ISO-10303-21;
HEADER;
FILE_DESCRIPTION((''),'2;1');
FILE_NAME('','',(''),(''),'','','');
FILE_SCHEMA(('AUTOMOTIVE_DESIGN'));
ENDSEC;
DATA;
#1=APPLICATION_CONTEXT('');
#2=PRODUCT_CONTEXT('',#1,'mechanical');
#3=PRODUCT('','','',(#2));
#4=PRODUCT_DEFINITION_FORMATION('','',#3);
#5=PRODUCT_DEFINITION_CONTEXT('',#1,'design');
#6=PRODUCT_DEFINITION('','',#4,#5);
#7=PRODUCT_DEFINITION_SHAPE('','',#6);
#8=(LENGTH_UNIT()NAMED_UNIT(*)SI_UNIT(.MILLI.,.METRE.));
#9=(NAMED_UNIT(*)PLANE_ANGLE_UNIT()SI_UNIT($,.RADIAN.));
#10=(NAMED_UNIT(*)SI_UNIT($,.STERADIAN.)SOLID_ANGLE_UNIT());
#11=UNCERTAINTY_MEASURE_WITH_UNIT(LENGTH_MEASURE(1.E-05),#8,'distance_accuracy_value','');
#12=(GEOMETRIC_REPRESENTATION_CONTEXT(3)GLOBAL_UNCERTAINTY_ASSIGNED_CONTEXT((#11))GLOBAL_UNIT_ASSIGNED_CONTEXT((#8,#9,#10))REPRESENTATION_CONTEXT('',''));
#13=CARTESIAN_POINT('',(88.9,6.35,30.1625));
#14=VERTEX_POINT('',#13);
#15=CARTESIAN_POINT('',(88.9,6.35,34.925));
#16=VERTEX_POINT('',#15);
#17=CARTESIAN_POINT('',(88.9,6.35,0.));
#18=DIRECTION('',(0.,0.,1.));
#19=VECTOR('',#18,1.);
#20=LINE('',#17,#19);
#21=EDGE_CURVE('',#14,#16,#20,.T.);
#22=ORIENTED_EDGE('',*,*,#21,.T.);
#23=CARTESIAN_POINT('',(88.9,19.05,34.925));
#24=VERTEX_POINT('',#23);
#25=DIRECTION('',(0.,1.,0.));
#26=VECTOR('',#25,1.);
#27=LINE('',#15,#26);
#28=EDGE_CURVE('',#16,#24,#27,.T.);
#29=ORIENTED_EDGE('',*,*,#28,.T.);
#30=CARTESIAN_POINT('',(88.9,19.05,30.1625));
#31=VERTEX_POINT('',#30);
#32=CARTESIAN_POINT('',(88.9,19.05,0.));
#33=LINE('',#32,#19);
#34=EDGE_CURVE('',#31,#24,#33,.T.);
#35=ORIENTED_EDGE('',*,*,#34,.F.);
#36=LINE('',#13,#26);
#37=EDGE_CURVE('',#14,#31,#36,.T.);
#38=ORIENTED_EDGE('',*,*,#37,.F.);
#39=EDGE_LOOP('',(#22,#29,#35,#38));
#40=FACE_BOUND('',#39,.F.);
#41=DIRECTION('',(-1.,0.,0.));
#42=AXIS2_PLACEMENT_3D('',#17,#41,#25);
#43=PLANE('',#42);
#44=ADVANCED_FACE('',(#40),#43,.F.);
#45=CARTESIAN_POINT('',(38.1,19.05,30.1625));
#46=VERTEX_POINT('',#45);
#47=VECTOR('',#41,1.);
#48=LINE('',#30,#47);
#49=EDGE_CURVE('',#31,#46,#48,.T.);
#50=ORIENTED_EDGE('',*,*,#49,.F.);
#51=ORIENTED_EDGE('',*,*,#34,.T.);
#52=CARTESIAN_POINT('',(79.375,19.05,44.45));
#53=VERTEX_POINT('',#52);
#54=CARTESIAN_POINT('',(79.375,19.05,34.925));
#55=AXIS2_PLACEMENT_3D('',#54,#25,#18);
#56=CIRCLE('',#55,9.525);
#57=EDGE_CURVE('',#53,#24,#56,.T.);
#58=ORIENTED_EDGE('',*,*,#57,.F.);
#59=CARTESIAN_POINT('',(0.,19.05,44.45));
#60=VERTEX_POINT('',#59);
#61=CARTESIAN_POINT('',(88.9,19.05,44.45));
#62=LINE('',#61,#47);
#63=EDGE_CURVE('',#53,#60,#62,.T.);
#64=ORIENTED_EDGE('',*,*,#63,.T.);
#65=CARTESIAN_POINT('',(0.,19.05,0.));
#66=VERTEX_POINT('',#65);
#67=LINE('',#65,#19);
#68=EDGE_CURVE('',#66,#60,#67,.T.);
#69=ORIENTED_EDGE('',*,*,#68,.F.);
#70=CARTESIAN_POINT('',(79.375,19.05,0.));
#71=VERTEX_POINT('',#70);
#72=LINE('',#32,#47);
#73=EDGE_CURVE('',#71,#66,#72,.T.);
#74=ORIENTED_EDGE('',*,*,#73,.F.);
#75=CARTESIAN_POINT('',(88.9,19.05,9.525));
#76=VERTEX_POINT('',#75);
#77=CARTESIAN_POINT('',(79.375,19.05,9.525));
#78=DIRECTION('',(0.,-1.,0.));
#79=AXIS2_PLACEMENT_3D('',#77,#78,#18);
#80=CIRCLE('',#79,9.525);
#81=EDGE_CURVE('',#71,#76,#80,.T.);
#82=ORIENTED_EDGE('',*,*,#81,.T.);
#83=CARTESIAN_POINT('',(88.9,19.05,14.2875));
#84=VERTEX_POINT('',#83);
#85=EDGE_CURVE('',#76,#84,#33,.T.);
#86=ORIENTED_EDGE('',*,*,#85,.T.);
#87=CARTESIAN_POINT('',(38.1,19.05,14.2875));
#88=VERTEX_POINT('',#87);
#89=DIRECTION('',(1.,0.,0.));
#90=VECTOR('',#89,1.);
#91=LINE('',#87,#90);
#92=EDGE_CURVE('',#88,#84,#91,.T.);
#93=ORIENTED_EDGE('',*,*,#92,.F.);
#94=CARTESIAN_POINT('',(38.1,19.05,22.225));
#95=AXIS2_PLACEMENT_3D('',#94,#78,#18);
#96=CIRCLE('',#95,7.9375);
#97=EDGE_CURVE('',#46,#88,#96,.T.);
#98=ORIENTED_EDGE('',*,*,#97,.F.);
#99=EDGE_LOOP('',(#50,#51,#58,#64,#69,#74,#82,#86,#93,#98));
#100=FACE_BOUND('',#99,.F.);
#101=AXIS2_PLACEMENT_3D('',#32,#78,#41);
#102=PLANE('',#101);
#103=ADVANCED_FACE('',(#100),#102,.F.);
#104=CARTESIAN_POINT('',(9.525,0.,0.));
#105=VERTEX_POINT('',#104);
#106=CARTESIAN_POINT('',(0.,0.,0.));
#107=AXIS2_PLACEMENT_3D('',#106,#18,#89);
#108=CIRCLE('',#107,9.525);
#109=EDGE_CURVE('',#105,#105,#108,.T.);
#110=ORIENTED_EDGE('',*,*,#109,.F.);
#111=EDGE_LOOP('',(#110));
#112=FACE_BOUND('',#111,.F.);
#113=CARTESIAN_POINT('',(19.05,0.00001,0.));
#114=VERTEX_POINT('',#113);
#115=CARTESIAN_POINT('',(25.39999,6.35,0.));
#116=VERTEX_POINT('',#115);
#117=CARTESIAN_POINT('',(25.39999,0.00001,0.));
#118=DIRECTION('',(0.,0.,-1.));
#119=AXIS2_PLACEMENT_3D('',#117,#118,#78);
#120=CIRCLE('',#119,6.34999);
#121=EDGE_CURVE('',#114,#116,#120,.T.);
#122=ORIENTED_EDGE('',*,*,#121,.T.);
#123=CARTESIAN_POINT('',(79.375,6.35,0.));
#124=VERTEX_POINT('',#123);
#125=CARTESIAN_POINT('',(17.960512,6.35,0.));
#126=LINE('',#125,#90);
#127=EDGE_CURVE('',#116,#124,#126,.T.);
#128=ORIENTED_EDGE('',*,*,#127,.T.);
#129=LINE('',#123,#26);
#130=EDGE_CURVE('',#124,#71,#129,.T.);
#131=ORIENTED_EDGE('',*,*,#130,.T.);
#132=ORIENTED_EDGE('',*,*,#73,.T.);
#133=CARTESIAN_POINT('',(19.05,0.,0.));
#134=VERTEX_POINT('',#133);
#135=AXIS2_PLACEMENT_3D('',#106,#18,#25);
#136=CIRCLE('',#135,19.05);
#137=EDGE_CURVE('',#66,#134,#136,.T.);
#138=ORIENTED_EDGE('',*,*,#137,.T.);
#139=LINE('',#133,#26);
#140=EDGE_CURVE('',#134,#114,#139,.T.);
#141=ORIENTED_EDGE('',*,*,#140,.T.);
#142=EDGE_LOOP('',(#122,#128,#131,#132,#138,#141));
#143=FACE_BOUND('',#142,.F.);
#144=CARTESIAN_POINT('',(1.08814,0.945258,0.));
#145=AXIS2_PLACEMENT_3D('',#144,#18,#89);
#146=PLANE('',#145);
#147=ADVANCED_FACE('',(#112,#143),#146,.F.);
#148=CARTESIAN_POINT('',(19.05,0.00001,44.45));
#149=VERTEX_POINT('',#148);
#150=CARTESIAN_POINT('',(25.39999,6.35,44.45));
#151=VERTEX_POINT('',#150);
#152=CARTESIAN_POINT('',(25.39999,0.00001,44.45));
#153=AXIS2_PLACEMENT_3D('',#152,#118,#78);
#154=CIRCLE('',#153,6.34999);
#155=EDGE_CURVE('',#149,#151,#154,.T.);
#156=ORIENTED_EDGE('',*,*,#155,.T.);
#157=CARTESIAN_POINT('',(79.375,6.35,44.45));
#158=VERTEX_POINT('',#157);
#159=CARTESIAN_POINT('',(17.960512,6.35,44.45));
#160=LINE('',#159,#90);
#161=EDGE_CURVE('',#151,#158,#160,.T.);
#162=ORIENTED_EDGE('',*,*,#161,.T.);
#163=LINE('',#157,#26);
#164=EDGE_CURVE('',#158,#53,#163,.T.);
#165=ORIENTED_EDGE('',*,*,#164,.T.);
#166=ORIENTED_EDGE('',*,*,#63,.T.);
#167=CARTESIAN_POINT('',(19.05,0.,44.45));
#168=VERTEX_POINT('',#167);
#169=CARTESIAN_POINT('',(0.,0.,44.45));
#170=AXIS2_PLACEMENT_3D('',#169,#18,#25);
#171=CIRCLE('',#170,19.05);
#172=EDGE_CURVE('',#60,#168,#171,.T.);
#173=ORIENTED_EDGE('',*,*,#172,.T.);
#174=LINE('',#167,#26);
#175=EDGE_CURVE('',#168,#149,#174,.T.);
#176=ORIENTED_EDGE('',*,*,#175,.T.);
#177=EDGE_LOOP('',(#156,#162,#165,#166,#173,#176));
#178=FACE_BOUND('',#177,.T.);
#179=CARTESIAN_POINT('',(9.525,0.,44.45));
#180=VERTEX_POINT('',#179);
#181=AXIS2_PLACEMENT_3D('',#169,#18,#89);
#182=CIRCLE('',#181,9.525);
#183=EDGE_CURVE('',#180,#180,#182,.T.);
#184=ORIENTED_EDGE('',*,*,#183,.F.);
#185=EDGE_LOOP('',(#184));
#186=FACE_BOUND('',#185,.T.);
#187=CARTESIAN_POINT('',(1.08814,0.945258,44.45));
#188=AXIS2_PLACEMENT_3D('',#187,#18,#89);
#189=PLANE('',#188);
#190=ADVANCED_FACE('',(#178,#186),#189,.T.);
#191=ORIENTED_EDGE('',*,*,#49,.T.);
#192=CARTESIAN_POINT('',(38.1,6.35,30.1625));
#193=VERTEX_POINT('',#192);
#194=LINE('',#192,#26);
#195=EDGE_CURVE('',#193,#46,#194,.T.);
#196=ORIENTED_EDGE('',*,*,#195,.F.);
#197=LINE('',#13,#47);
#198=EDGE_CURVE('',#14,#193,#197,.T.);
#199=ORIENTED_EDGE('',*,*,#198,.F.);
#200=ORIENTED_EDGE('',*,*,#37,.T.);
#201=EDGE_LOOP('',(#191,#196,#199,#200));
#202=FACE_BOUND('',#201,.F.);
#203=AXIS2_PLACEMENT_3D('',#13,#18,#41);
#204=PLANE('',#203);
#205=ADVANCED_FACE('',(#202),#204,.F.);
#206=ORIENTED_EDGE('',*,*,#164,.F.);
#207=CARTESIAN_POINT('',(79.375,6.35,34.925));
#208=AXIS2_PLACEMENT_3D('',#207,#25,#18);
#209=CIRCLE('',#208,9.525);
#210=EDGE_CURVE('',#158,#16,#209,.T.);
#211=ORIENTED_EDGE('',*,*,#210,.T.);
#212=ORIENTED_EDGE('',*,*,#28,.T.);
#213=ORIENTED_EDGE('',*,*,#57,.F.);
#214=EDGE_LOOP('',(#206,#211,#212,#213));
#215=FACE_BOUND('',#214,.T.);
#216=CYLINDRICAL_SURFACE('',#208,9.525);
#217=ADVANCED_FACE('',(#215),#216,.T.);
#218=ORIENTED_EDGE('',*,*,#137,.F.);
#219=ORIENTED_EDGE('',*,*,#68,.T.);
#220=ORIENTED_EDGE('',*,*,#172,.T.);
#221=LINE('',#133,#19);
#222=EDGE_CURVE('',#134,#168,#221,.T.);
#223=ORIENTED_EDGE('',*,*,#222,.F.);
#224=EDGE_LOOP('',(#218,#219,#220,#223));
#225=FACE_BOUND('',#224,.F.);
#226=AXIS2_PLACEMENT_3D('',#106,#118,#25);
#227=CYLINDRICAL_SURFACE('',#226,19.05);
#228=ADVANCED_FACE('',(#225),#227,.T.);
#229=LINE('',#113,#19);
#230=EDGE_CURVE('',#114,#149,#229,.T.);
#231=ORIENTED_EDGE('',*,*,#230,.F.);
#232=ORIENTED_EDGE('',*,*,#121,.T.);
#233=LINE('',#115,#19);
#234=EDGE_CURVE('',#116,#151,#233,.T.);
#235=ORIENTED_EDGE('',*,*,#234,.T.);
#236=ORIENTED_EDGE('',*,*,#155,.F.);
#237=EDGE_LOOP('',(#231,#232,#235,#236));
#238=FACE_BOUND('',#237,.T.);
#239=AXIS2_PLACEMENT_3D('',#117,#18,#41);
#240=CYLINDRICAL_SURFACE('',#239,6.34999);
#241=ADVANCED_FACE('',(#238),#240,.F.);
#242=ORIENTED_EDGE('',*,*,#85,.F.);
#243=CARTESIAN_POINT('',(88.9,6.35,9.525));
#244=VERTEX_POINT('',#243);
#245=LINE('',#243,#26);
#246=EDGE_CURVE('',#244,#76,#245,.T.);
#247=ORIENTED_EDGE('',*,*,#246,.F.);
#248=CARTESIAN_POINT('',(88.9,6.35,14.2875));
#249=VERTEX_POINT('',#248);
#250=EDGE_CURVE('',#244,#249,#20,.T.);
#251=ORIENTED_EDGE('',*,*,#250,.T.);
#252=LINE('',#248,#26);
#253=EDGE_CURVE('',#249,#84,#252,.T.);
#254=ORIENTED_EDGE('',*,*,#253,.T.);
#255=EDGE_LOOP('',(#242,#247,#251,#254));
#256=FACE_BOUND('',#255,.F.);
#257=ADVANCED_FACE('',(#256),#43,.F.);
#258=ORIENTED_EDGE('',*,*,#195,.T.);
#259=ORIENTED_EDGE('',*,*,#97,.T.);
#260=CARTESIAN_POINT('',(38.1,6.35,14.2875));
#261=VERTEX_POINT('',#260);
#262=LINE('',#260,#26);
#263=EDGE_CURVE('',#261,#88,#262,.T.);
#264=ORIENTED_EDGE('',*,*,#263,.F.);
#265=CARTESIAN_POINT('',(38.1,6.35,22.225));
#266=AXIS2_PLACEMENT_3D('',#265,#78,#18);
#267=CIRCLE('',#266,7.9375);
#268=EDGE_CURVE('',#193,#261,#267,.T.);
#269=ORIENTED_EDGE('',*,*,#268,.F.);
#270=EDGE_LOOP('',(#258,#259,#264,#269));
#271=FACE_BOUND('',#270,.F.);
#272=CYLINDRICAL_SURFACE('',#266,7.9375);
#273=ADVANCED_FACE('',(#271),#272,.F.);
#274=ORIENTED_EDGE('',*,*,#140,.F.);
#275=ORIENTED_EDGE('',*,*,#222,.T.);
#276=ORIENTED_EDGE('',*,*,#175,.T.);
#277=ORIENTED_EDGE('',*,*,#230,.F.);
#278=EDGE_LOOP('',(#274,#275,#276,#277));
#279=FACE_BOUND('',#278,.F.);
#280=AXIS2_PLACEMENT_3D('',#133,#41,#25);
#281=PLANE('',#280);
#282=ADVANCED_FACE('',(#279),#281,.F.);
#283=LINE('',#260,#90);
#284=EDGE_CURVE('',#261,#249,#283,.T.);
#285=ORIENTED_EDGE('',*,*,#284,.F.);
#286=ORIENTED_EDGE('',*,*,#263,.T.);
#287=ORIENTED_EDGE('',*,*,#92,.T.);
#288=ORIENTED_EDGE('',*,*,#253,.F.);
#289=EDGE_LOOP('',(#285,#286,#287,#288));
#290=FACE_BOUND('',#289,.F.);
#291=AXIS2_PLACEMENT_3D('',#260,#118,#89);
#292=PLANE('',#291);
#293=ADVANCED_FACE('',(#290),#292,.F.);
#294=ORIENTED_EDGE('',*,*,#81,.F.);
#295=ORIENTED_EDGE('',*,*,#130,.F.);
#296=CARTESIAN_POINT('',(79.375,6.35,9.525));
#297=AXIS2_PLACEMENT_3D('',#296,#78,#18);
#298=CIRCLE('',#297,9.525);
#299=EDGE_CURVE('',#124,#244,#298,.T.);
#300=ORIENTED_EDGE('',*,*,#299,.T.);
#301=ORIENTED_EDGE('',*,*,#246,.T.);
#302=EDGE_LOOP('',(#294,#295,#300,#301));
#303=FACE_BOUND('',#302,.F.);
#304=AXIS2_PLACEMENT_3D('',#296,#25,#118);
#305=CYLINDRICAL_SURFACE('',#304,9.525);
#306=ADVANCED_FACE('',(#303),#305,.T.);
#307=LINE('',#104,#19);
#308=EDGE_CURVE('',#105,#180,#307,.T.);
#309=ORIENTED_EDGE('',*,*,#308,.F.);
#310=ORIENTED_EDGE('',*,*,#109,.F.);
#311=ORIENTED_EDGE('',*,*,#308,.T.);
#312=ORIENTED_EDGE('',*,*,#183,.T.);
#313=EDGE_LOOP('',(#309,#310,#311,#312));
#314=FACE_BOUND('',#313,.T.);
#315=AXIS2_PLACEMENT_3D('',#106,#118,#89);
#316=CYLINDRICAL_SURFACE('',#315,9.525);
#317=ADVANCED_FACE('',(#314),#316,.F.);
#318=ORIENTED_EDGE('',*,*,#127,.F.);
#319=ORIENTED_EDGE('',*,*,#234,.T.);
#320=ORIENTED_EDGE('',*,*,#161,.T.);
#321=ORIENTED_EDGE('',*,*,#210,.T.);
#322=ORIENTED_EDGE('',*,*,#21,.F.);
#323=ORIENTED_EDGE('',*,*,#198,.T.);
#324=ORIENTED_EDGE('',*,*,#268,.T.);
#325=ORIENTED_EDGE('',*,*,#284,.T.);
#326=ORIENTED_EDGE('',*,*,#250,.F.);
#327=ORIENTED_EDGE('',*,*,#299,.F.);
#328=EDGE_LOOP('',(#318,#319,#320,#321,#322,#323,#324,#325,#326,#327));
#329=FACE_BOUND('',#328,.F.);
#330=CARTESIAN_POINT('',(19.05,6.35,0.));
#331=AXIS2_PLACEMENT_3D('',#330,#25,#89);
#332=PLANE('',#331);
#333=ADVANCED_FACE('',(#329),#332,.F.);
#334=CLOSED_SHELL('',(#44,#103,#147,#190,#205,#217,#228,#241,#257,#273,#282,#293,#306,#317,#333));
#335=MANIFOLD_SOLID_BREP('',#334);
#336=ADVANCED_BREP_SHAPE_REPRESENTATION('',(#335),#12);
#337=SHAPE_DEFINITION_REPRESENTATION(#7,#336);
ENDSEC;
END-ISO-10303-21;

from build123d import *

# Parameters (mm, degrees)
F0_R     = 9.525
F1_DEPTH = 44.45
F2_R     = 6.34999
F4_DEPTH = 12.7
F5_R     = 9.525


# Not quite as in the source:
# - a fillet or chamfer is up to 0.001 mm smaller than in the source, because OpenCascade refuses the exact size


with BuildPart() as f1:
    # F0 (on Top) → F1 (new body)
    with BuildSketch(Plane.XY):
        with BuildLine():
            ThreePointArc((0, 19.05), (-13.4703841816, -13.4703841816), (19.05, 0))
            Line((19.05, 0), (19.05, 6.35))
            Line((19.05, 6.35), (17.9605122421, 6.35))
            ThreePointArc((17.9605122421, 6.35), (10.9985226281, 15.5542598667), (0, 19.05))
        make_face()
        Circle(F0_R, mode=Mode.SUBTRACT)
        with BuildLine():
            Line((38.1, 19.05), (0, 19.05))
            ThreePointArc((0, 19.05), (10.9985226281, 15.5542598667), (17.9605122421, 6.35))
            Line((17.9605122421, 6.35), (19.05, 6.35))
            Line((19.05, 6.35), (38.1, 6.35))
            Line((38.1, 6.35), (88.9, 6.35))
            Line((88.9, 6.35), (88.9, 19.05))
            Line((88.9, 19.05), (38.1, 19.05))
        make_face()
    extrude(amount=F1_DEPTH)

    # F2 (radius 6.35 in the source; OpenCascade refuses exactly that, so slightly less here)
    f2_edges = [f1.edges().sort_by_distance(p)[0] for p in [
        (19.05, 6.35, 22.225),
    ]]
    fillet(f2_edges, radius=F2_R)

    # F3 (on face) → F4 (cut)
    with BuildSketch(Plane.XZ.offset(-6.35)):
        with BuildLine():
            Line((88.9, 14.2875), (88.9, 30.1625))
            Line((88.9, 30.1625), (38.1, 30.1625))
            ThreePointArc((38.1, 30.1625), (43.7126600757, 27.8376600757), (46.0375, 22.225))
            ThreePointArc((46.0375, 22.225), (43.7126600757, 16.6123399243), (38.1, 14.2875))
            Line((38.1, 14.2875), (88.9, 14.2875))
        make_face()
        with BuildLine():
            ThreePointArc((46.0375, 22.225), (43.7126600757, 27.8376600757), (38.1, 30.1625))
            Line((38.1, 30.1625), (38.1, 22.225))
            Line((38.1, 22.225), (38.1, 14.2875))
            ThreePointArc((38.1, 14.2875), (43.7126600757, 16.6123399243), (46.0375, 22.225))
        make_face()
        with BuildLine():
            Line((38.1, 22.225), (38.1, 30.1625))
            ThreePointArc((38.1, 30.1625), (30.1625, 22.225), (38.1, 14.2875))
            Line((38.1, 14.2875), (38.1, 22.225))
        make_face()
    extrude(amount=-F4_DEPTH, mode=Mode.SUBTRACT)

    # F5
    f5_edges = [f1.edges().sort_by_distance(p)[0] for p in [
        (88.9, 12.7, 44.45),
        (88.9, 12.7, 0),
    ]]
    fillet(f5_edges, radius=F5_R)


solid = f1.part
